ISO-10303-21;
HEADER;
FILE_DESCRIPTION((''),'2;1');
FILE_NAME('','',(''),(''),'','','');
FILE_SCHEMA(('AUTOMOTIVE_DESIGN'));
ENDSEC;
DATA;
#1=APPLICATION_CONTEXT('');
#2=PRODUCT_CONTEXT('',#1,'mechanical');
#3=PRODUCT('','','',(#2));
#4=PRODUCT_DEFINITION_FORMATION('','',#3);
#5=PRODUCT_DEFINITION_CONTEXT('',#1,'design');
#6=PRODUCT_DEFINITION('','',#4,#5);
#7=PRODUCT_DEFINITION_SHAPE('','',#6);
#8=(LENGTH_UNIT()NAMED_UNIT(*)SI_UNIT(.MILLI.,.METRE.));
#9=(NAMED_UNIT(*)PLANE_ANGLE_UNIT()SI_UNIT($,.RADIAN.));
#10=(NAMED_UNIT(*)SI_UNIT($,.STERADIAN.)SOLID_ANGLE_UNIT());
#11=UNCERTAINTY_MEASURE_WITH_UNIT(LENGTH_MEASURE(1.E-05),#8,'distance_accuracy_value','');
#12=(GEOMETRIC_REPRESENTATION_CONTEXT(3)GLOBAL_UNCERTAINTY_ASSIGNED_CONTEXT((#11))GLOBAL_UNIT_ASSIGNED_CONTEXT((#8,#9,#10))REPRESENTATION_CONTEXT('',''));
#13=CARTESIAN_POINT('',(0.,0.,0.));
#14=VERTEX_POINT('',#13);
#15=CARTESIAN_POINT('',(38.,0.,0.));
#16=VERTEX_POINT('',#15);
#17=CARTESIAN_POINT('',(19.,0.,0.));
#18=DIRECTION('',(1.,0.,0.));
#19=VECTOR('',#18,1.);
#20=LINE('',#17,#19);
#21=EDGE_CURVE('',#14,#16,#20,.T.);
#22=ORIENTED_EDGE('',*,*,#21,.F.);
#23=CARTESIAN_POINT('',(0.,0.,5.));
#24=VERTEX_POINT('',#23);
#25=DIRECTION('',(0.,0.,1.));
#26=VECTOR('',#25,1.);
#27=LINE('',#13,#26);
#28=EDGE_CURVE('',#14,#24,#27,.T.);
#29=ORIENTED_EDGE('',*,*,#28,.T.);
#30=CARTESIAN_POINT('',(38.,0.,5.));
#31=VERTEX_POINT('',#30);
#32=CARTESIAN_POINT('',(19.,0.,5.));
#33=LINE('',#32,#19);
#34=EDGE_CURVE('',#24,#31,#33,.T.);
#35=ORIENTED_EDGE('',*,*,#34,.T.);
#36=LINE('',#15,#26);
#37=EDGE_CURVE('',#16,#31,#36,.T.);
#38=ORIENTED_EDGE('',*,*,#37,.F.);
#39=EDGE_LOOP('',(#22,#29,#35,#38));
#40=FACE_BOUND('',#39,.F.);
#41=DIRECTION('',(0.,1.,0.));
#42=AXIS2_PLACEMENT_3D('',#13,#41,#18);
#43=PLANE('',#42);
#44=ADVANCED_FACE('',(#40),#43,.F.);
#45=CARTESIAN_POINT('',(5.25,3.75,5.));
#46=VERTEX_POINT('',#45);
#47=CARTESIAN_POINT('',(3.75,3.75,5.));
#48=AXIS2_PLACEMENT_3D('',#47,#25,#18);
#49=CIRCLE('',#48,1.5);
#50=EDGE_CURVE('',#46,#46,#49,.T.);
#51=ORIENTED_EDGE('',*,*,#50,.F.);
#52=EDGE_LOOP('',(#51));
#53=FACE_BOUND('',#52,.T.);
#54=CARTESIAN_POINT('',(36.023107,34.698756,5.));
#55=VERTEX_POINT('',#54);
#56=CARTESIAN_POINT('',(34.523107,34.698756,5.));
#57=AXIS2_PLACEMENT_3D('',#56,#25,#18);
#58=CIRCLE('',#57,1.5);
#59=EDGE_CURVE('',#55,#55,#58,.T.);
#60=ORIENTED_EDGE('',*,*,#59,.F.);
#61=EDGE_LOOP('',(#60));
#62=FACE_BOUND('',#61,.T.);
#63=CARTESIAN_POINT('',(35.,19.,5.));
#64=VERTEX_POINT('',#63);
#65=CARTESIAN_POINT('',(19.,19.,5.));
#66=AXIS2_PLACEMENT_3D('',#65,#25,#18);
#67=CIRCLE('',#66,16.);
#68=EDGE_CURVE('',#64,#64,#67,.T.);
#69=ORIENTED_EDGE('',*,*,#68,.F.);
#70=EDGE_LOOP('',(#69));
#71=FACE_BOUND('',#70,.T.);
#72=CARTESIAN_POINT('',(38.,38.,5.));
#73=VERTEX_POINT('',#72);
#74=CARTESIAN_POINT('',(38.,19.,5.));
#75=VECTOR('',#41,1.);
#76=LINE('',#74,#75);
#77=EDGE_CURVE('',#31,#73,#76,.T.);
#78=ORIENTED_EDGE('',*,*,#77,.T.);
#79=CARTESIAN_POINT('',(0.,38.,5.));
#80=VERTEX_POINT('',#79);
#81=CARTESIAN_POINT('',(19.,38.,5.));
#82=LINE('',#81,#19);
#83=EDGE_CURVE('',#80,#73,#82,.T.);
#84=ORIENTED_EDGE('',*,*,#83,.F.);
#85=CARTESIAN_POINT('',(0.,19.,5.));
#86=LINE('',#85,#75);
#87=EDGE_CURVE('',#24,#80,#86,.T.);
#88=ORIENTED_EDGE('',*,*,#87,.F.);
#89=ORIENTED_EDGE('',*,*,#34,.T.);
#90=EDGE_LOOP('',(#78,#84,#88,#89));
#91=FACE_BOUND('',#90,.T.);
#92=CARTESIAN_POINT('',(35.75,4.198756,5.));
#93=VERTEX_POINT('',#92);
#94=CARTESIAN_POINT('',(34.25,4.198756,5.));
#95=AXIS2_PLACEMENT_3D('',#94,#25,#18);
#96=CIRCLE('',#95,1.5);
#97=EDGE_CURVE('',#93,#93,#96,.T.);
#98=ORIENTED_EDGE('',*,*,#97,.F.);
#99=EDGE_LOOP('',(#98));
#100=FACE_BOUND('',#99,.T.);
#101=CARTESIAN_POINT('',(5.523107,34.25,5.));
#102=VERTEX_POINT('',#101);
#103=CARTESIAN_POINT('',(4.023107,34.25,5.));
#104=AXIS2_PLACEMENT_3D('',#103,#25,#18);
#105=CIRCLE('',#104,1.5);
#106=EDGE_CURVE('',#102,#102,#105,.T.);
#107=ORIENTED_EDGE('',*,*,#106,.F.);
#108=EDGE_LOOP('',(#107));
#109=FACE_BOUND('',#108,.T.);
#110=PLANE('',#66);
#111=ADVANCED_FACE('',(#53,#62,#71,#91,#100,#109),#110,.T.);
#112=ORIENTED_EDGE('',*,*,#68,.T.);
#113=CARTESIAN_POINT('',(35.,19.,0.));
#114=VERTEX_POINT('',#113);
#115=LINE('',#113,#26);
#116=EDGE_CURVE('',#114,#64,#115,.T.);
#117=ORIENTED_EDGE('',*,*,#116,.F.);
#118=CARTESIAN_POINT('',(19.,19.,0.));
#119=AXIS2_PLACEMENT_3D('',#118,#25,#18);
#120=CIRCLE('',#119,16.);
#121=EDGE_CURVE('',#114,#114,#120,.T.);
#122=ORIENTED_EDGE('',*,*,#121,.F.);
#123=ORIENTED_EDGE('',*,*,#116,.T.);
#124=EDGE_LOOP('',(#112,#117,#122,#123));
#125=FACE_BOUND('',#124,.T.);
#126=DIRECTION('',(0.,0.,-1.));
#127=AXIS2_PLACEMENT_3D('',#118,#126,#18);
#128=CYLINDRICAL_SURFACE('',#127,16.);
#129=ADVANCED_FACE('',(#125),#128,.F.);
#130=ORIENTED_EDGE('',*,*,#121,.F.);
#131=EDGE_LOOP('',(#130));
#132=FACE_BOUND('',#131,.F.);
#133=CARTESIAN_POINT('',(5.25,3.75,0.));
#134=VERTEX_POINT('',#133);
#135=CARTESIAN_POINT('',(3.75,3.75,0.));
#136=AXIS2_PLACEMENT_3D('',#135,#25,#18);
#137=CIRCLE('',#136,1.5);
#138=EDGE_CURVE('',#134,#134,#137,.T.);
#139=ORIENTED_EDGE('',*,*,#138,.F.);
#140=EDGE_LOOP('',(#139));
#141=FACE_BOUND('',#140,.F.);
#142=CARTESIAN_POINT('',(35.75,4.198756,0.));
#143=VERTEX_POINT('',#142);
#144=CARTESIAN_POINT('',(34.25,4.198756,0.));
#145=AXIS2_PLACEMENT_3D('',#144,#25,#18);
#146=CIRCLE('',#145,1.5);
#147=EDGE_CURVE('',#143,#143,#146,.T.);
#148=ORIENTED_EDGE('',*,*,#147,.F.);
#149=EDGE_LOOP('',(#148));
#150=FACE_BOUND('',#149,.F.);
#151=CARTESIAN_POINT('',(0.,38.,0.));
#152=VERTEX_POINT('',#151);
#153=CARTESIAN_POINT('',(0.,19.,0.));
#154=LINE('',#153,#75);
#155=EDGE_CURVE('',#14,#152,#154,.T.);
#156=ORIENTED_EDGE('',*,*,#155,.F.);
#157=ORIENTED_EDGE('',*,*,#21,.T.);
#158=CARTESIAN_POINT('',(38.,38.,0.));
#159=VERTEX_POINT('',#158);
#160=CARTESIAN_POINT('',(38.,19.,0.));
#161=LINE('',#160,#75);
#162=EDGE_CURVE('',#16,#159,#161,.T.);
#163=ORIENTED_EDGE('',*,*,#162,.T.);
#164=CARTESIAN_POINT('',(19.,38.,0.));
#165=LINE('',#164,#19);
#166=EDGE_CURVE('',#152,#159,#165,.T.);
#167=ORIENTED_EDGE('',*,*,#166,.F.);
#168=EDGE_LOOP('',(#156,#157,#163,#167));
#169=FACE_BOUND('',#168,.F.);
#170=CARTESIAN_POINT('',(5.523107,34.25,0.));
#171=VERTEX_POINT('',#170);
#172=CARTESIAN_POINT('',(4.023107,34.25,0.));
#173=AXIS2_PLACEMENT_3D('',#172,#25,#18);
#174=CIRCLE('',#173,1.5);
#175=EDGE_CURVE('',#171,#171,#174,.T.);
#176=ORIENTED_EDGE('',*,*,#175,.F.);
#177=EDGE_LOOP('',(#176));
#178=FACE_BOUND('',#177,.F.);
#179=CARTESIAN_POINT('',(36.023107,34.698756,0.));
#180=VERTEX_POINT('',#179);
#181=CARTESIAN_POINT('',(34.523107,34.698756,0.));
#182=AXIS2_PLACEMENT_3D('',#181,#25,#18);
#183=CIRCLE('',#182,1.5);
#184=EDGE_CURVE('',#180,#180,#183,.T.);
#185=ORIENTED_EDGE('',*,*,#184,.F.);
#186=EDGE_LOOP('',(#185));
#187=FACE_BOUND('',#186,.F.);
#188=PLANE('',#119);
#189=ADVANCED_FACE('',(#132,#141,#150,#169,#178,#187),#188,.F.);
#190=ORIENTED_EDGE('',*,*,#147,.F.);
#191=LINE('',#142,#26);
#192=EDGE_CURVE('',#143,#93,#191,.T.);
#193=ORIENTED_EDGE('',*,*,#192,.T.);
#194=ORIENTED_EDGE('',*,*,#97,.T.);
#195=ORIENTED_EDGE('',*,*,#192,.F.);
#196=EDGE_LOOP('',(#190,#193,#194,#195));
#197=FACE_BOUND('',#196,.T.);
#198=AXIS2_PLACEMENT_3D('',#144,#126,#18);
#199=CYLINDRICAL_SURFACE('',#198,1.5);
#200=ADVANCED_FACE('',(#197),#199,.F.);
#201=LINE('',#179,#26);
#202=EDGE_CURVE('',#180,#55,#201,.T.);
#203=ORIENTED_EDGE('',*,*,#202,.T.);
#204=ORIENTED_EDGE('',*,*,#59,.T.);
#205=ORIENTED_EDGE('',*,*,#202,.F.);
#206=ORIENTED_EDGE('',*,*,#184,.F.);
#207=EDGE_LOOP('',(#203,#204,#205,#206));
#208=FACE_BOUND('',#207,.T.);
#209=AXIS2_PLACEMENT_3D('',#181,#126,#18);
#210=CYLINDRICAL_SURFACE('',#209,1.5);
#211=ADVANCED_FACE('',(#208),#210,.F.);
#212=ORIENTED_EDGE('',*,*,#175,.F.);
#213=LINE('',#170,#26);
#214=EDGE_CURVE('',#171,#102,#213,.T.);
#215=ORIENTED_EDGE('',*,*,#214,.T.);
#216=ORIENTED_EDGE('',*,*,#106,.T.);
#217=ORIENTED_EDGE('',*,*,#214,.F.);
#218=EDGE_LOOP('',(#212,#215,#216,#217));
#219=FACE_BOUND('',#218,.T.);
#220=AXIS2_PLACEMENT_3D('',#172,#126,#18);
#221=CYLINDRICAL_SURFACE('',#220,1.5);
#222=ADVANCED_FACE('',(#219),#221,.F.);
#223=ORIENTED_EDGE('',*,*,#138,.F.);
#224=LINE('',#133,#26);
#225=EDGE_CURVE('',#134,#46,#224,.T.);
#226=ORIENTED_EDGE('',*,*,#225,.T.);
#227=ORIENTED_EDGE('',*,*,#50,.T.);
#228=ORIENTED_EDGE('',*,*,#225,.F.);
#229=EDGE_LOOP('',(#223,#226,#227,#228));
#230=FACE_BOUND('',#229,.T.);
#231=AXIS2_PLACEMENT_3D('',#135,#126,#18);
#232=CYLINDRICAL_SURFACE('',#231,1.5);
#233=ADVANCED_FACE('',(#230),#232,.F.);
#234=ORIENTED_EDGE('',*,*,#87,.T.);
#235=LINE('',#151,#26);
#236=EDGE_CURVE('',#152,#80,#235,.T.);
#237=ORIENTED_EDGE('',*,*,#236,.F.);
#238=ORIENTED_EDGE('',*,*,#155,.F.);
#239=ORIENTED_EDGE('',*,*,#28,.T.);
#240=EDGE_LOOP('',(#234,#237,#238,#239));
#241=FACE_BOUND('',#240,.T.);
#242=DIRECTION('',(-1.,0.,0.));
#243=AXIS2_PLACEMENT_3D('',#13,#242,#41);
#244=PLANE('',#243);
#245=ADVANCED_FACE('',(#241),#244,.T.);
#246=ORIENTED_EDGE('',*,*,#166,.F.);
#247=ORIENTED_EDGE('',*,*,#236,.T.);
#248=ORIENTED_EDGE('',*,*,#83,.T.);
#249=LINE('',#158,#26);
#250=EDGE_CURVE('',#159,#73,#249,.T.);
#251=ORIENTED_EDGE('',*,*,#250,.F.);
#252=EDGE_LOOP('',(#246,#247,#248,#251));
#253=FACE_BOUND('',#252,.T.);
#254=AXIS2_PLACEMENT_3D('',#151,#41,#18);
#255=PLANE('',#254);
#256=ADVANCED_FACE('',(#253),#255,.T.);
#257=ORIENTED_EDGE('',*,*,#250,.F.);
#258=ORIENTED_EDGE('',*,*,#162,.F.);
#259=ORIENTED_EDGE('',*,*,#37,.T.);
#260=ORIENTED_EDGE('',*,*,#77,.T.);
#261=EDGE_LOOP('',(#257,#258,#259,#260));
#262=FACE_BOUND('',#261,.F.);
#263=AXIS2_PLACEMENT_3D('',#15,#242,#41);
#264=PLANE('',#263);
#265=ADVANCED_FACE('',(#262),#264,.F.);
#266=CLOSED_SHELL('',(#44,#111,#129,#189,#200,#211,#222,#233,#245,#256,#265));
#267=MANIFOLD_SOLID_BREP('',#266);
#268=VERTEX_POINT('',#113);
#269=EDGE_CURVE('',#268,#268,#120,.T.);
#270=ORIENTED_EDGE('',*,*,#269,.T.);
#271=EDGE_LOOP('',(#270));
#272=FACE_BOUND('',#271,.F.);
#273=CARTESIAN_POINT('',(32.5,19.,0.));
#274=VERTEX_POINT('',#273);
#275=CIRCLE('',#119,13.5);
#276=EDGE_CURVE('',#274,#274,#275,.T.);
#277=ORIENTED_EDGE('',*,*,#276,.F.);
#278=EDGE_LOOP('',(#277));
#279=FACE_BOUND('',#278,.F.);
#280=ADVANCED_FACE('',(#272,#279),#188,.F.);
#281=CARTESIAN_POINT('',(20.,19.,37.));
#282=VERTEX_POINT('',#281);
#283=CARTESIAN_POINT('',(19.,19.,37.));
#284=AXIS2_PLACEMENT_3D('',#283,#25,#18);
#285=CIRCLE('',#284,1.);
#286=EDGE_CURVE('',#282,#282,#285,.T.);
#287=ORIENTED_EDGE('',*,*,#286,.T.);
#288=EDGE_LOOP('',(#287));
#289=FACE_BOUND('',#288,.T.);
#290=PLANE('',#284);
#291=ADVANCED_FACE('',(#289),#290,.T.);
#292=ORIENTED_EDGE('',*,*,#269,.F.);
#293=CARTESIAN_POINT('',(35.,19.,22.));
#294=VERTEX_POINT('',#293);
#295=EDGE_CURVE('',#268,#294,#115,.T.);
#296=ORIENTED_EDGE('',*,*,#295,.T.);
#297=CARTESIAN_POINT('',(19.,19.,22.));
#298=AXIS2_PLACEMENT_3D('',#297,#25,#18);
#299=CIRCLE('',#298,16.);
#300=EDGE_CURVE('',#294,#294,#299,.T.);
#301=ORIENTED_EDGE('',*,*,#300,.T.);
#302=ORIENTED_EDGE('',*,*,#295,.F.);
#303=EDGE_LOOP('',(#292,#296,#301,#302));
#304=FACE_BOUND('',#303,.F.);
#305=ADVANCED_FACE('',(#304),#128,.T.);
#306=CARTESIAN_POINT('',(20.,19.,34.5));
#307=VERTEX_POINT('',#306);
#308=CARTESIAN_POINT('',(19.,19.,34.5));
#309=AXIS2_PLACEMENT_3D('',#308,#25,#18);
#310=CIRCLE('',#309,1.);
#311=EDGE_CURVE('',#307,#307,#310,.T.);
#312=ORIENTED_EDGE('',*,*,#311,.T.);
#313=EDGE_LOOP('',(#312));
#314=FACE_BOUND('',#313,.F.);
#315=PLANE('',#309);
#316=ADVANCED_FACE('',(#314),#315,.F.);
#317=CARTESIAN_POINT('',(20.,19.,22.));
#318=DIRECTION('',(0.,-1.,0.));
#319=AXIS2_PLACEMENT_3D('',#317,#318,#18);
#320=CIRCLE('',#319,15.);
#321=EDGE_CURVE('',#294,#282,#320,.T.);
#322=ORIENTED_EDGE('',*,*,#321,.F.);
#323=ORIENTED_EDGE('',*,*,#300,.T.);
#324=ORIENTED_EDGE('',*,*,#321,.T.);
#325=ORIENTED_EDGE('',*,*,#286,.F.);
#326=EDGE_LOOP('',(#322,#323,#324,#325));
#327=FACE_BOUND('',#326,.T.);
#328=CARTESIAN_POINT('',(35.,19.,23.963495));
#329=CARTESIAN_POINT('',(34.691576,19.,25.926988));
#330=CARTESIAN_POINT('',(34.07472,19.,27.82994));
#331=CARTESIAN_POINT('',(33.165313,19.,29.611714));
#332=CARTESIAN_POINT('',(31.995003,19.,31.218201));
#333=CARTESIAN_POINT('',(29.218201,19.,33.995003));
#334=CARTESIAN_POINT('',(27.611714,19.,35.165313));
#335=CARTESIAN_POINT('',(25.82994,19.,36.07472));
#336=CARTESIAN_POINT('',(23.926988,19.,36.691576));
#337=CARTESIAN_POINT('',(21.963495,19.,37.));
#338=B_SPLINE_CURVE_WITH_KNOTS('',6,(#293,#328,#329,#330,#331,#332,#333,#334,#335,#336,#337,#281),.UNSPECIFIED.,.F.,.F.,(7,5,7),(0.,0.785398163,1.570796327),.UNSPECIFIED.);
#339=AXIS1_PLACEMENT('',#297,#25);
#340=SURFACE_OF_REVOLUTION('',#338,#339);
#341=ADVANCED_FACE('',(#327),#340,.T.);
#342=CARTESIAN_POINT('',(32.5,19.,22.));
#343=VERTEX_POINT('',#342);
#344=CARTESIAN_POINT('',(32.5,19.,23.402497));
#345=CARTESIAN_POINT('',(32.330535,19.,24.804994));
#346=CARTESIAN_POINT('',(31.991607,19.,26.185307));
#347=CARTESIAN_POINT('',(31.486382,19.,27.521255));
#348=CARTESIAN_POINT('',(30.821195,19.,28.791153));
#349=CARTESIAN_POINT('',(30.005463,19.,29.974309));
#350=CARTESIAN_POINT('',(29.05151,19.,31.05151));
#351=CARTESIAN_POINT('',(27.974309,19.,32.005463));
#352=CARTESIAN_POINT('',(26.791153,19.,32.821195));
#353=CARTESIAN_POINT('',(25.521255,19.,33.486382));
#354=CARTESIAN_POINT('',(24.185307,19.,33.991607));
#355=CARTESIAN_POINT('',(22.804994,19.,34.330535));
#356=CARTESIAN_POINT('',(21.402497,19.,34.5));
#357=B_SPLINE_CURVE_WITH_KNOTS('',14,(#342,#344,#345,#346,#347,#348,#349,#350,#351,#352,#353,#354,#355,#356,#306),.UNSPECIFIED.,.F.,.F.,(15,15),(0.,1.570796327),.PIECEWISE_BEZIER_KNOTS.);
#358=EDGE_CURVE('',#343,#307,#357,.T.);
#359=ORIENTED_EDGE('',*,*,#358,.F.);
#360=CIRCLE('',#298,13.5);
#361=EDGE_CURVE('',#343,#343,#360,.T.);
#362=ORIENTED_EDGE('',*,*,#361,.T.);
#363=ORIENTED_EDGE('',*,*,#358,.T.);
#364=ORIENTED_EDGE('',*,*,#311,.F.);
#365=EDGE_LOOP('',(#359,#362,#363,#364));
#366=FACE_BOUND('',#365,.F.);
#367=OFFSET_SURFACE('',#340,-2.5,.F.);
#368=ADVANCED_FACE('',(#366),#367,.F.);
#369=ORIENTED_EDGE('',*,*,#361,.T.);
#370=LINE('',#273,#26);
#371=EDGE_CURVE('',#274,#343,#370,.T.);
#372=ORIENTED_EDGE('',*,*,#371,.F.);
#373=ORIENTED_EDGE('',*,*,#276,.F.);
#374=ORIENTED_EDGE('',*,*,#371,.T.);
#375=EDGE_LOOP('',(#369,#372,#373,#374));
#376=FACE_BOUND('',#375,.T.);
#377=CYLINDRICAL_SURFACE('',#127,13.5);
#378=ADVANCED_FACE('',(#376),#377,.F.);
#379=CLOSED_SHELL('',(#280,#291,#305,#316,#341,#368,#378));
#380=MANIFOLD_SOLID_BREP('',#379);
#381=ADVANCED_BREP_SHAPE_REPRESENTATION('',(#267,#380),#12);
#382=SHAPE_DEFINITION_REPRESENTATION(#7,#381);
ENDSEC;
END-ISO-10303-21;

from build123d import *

# Parameters (mm, degrees)
F0_R     = 16
F1_DEPTH = 37
F0_W     = 38
F0_H     = 38
F0_R_2   = 1.5
F2_DEPTH = 5
F3_R     = 15
F4_T     = -2.5


with BuildPart() as f1:
    # F0 (on Top) → F1 (new body)
    with BuildSketch(Plane.XY):
        with Locations((19, 19)):
            Circle(F0_R)
    extrude(amount=F1_DEPTH)

    # F3
    f3_edges = [f1.edges().sort_by_distance(p)[0] for p in [
        (3, 19, 37),
    ]]
    fillet(f3_edges, radius=F3_R)

    # F4
    f4_openings = [f1.faces().sort_by_distance(p)[0] for p in [
        (19, 19, 0),
    ]]
    offset(amount=F4_T, openings=f4_openings)


with BuildPart() as f2:
    # F0 (on Top) → F2 (new body)
    with BuildSketch(Plane.XY):
        with Locations((19, 19)):
            Rectangle(F0_W, F0_H)
        with Locations((3.75, 3.75)):
            Circle(F0_R_2, mode=Mode.SUBTRACT)
        with Locations((34.25, 4.1987560689)):
            Circle(F0_R_2, mode=Mode.SUBTRACT)
        with Locations((4.0231071115, 34.25)):
            Circle(F0_R_2, mode=Mode.SUBTRACT)
        with Locations((19, 19)):
            Circle(F0_R, mode=Mode.SUBTRACT)
        with Locations((34.5231071115, 34.6987560689)):
            Circle(F0_R_2, mode=Mode.SUBTRACT)
    extrude(amount=F2_DEPTH)


solid = Compound([f1.part, f2.part])
